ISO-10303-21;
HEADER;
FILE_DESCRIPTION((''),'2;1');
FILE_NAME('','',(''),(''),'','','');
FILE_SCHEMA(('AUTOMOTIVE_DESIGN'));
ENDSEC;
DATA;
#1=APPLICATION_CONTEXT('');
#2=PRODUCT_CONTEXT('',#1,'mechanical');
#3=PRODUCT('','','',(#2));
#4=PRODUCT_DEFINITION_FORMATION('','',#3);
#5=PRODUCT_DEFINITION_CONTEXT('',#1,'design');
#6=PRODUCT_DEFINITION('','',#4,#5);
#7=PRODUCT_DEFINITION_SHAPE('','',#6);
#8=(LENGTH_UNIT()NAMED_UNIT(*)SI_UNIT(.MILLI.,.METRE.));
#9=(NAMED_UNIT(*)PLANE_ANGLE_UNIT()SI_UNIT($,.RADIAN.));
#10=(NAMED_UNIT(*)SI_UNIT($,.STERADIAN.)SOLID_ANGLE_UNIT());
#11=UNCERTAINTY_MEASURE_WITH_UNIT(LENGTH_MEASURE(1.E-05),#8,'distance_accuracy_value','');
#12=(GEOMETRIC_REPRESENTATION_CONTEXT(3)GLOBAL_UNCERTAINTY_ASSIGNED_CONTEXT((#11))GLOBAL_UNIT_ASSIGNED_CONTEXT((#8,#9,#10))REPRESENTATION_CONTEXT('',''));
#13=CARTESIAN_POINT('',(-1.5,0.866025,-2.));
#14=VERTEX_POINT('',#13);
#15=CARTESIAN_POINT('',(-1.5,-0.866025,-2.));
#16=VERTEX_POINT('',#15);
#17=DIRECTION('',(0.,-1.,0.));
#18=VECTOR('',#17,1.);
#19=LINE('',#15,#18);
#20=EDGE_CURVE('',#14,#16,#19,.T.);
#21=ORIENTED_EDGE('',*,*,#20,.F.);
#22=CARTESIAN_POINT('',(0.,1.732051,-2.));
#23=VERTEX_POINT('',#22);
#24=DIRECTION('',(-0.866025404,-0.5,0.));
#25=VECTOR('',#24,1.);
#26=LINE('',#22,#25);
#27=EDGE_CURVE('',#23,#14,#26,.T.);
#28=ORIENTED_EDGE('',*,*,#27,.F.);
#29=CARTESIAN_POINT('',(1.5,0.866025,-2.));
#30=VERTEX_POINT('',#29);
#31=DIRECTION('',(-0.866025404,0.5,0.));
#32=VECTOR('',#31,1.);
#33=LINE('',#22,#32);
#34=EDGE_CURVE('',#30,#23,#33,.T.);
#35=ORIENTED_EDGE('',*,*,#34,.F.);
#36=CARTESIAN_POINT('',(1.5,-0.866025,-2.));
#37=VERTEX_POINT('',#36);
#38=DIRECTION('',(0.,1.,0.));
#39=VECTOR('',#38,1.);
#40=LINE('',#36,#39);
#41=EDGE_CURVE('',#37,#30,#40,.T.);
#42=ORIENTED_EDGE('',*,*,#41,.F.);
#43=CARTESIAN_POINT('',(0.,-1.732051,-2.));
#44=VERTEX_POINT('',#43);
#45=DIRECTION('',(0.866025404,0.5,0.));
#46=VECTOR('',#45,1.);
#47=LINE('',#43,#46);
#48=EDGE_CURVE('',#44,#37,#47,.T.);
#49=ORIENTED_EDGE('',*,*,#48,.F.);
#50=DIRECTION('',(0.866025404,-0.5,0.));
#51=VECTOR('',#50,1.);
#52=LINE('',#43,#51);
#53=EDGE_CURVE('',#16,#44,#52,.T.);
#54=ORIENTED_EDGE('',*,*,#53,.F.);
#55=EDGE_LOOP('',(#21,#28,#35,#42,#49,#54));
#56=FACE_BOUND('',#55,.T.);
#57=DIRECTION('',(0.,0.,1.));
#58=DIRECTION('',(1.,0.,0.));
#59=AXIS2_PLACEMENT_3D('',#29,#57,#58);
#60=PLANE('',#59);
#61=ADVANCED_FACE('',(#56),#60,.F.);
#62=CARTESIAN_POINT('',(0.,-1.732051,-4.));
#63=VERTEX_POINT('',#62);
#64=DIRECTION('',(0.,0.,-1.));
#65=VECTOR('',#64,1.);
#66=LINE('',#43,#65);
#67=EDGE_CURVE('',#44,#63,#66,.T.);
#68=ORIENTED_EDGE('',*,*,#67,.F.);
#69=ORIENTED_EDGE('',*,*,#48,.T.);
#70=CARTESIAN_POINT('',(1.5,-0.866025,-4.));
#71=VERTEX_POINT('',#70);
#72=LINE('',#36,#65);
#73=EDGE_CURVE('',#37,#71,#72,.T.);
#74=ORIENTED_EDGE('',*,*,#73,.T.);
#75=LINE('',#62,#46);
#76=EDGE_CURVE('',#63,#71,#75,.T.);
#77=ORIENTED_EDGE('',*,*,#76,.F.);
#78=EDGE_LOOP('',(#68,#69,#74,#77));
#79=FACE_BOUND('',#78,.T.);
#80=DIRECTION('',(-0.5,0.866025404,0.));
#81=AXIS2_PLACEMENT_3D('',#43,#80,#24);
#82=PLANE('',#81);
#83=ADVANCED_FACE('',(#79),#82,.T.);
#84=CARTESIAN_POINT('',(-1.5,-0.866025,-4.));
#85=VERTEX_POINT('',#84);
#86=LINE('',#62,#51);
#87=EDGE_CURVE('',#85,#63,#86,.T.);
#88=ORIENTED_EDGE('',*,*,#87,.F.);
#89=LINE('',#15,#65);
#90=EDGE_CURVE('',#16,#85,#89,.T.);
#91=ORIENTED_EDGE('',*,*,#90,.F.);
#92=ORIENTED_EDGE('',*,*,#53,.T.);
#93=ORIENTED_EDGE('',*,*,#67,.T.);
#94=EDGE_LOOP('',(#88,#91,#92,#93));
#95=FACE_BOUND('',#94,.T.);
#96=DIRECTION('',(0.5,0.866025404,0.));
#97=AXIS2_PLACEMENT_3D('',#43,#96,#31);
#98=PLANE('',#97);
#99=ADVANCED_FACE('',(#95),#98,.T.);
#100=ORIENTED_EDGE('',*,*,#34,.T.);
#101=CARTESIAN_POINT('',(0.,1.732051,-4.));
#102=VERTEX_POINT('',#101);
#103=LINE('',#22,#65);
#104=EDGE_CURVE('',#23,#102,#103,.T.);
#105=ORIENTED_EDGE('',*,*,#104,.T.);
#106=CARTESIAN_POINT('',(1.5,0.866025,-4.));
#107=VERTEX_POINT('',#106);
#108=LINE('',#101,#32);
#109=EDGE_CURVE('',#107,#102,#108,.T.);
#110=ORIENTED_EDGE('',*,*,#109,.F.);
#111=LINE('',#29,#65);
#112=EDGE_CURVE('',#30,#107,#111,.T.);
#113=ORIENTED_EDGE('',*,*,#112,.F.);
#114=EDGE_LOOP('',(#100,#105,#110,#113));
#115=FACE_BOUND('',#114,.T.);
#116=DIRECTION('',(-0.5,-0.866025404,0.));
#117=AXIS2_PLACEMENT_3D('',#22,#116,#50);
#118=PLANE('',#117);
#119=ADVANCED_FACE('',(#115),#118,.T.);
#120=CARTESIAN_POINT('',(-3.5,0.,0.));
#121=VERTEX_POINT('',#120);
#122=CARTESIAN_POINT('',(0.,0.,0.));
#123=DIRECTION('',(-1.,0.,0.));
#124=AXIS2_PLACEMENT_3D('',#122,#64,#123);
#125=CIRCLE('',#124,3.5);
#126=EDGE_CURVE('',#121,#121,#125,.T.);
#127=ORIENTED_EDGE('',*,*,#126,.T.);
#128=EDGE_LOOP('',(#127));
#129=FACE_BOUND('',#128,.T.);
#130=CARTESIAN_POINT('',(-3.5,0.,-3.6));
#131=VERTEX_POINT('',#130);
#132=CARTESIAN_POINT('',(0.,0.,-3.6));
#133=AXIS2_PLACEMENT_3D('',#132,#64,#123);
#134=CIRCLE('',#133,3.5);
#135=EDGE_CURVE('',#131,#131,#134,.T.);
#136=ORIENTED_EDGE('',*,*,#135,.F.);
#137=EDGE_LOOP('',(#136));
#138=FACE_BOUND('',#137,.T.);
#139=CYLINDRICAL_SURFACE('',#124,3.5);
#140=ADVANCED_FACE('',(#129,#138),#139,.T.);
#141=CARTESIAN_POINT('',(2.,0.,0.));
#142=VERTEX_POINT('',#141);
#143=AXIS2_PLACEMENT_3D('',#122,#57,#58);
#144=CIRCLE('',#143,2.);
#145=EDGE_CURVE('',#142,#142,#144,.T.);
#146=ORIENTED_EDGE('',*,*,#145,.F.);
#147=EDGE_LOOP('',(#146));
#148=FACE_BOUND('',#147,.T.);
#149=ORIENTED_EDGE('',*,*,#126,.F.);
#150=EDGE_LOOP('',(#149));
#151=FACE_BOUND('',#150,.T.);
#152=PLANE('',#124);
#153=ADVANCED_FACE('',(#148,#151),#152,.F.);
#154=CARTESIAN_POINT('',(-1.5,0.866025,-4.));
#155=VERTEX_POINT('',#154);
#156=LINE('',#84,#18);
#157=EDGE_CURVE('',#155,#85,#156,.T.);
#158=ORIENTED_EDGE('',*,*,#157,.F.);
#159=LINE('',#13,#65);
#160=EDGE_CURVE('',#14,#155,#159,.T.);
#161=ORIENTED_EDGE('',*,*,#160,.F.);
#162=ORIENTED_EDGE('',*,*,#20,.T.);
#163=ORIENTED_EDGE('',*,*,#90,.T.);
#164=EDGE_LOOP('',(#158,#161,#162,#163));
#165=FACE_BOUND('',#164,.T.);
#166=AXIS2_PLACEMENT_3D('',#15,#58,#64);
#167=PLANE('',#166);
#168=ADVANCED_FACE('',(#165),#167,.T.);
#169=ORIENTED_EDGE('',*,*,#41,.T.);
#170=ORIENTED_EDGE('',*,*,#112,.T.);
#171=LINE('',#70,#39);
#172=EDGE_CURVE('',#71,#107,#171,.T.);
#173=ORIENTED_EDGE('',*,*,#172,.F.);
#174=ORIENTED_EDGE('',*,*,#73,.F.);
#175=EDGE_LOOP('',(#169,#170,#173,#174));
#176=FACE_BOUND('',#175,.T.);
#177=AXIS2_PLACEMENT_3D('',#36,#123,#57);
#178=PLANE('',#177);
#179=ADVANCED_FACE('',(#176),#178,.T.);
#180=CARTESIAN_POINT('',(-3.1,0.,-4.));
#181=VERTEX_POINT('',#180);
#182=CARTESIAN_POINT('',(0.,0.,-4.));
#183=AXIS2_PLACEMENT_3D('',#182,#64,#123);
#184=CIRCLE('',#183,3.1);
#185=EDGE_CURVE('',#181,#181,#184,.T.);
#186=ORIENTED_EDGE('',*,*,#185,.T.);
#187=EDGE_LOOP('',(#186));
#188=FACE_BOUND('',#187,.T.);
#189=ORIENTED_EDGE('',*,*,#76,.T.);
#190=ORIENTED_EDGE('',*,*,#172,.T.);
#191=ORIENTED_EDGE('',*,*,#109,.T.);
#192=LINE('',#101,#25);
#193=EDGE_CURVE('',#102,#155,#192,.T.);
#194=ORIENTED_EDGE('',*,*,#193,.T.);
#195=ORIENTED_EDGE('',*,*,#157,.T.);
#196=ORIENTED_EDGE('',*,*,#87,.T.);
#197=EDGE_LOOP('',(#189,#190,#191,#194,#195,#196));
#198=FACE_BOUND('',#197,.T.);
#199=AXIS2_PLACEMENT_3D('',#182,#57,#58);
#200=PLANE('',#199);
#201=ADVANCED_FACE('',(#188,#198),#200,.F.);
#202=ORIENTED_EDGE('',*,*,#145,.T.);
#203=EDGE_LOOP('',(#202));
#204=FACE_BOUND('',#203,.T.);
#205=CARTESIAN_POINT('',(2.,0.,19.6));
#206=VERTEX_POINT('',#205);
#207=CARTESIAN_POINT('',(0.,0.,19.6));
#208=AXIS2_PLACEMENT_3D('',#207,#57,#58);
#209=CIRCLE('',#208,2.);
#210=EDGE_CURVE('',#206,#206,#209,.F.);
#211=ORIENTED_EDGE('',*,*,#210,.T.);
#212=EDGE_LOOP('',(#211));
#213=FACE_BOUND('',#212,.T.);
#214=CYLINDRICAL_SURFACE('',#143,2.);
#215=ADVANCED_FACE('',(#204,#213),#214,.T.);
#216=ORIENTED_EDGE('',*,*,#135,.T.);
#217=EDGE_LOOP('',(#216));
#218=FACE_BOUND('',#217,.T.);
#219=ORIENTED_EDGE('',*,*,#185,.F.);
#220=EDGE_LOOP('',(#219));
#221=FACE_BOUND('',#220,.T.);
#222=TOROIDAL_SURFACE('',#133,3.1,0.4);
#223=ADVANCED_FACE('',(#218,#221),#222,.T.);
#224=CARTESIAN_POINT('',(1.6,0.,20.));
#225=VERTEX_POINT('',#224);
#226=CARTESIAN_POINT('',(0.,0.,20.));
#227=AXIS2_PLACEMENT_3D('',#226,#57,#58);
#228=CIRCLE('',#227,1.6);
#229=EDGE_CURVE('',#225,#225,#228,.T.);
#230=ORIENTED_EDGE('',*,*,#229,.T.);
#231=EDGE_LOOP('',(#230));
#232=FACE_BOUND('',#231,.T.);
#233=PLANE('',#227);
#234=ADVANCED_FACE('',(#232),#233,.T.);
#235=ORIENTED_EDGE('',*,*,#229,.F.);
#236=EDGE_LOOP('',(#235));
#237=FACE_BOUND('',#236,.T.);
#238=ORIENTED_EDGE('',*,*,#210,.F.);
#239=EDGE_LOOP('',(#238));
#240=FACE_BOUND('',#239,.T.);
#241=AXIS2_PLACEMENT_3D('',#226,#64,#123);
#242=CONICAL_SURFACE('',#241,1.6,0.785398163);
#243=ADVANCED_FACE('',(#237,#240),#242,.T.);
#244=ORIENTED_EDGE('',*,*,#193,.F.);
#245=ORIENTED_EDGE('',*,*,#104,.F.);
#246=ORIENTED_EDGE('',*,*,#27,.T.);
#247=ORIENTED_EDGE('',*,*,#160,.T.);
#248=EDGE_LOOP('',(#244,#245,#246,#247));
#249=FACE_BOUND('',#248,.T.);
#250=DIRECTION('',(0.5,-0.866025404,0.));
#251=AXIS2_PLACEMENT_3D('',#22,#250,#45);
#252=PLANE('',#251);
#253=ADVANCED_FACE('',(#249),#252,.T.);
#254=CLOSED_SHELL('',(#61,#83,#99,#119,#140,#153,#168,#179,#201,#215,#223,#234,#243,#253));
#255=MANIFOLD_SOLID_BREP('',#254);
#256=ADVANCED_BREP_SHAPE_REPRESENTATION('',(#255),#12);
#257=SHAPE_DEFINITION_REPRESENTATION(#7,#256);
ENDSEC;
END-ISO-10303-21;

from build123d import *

# Parameters (mm, degrees)
ENLEV_MAT_EXTRU1_DEPTH = 2
ESQUISSE3_W            = 2
ESQUISSE3_H            = 20
CHANFREIN1_SIZE        = 0.4


with BuildPart() as part:
    # Esquisse1 → Base-Révolution (revolve)
    with BuildSketch(Plane(origin=(0, 0, 0), x_dir=(1, 0, 0), z_dir=(0, 1, 0)), mode=Mode.PRIVATE) as base_r_volution_sk:
        with BuildLine():
            Line((0, 0), (3.5, 0))
            Line((3.5, 0), (3.5, 3.6))
            ThreePointArc((3.5, 3.6), (3.382842712, 3.882842712), (3.1, 4))
            Line((3.1, 4), (0, 4))
            Line((0, 4), (0, 0))
        make_face()
    revolve(base_r_volution_sk.sketch.rotate(Axis((0, 0, 0), (0, 0, -1)), 180), axis=Axis((0, 0, 0), (0, 0, -1)))

    # Esquisse2 → enlev-mat-Extru1 (cut)
    with BuildSketch(Plane.XY.offset(-4)):
        Polygon((1.5, -0.866025404), (1.5, 0.866025404), (0, 1.732050808), (-1.5, 0.866025404), (-1.5, -0.866025404), (0, -1.732050808), align=None)
    extrude(amount=ENLEV_MAT_EXTRU1_DEPTH, mode=Mode.SUBTRACT)

    # Esquisse3 → Boss.-Révol.1 (revolve)
    with BuildSketch(Plane(origin=(0, 0, 0), x_dir=(1, 0, 0), z_dir=(0, 1, 0))):
        with Locations((1, -10)):
            Rectangle(ESQUISSE3_W, ESQUISSE3_H)
    revolve(axis=Axis((0, 0, 0), (0, 0, 1)))

    # Chanfrein1
    chanfrein1_edges = [part.edges().sort_by_distance(p)[0] for p in [
        (-2, 0, 20),
    ]]
    chamfer(chanfrein1_edges, length=CHANFREIN1_SIZE)


solid = part.part
